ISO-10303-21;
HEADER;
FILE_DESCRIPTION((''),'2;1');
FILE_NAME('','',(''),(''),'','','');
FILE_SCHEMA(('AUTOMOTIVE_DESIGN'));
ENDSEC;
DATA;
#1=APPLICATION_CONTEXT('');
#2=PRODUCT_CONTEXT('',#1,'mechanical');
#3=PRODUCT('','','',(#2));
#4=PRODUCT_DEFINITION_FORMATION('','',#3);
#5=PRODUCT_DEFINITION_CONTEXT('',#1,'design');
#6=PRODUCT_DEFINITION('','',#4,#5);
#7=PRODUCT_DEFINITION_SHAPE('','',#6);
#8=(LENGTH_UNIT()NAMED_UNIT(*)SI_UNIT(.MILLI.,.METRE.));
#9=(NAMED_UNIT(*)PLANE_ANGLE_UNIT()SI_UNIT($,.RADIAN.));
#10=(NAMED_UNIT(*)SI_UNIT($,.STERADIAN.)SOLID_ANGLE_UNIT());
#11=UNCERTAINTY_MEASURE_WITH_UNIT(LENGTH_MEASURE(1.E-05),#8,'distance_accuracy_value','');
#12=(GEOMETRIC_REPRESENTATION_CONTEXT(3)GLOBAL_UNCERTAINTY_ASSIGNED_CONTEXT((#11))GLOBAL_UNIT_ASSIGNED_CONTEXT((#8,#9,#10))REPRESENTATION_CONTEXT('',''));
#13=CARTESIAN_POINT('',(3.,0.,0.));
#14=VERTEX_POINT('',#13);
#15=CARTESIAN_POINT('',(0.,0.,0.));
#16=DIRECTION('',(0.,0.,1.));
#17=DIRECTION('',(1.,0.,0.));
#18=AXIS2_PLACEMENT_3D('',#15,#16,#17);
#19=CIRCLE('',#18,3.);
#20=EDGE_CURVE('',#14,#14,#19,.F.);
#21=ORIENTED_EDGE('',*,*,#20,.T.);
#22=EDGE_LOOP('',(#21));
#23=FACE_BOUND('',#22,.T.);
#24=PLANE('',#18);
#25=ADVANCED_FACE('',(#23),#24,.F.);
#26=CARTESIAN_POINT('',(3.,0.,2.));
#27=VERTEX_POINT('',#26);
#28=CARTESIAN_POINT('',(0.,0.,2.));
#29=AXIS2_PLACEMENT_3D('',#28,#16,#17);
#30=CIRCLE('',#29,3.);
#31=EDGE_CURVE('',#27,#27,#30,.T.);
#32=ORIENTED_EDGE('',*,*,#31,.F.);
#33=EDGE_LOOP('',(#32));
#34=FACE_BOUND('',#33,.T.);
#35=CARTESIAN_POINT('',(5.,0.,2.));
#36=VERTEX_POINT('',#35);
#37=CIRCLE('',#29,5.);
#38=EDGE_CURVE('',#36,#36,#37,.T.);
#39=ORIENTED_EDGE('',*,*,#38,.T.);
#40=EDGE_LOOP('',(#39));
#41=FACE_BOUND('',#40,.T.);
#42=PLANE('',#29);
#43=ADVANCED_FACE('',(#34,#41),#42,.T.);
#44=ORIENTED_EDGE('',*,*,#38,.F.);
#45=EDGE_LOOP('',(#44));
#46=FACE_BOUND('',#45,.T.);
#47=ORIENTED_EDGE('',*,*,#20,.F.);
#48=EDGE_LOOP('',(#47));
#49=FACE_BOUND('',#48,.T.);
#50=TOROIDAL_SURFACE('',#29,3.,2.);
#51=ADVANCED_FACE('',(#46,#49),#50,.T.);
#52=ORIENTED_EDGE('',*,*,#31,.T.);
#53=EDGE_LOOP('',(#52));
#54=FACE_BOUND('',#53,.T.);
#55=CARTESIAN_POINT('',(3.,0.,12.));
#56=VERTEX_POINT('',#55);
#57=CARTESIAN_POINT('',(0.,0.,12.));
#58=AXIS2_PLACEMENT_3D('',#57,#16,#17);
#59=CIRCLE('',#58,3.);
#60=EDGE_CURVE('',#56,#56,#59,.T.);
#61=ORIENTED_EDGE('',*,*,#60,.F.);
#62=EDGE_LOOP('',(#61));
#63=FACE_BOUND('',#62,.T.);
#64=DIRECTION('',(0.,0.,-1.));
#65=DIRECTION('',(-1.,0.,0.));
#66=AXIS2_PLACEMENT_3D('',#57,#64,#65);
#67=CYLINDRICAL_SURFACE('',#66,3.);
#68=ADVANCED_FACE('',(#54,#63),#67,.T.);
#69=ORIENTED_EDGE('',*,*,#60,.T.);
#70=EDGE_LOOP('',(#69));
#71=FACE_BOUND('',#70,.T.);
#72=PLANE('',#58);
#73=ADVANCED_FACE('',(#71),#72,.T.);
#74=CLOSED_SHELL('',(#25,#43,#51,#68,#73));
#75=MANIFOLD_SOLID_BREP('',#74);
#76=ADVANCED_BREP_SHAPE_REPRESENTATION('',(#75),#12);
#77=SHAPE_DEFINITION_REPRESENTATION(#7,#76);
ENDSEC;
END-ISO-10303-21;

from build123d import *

# Parameters (mm, degrees)
ESQUISSE1_R          = 5
BASE_EXTRUSION_DEPTH = 2
ESQUISSE2_R          = 3
BOSS_EXTRU_1_DEPTH   = 10
CONG_1_R             = 2


with BuildPart() as part:
    # Esquisse1 → Base-Extrusion (new body)
    with BuildSketch(Plane.XY):
        Circle(ESQUISSE1_R)
    extrude(amount=BASE_EXTRUSION_DEPTH)

    # Esquisse2 → Boss.-Extru.1 (add)
    with BuildSketch(Plane.XY.offset(2)):
        Circle(ESQUISSE2_R)
    extrude(amount=BOSS_EXTRU_1_DEPTH)

    # Congé1
    cong_1_edges = [part.edges().sort_by_distance(p)[0] for p in [
        (-5, 0, 0),
    ]]
    fillet(cong_1_edges, radius=CONG_1_R - 0.0001)  # a hair under: the kernel refuses the full size


solid = part.part
